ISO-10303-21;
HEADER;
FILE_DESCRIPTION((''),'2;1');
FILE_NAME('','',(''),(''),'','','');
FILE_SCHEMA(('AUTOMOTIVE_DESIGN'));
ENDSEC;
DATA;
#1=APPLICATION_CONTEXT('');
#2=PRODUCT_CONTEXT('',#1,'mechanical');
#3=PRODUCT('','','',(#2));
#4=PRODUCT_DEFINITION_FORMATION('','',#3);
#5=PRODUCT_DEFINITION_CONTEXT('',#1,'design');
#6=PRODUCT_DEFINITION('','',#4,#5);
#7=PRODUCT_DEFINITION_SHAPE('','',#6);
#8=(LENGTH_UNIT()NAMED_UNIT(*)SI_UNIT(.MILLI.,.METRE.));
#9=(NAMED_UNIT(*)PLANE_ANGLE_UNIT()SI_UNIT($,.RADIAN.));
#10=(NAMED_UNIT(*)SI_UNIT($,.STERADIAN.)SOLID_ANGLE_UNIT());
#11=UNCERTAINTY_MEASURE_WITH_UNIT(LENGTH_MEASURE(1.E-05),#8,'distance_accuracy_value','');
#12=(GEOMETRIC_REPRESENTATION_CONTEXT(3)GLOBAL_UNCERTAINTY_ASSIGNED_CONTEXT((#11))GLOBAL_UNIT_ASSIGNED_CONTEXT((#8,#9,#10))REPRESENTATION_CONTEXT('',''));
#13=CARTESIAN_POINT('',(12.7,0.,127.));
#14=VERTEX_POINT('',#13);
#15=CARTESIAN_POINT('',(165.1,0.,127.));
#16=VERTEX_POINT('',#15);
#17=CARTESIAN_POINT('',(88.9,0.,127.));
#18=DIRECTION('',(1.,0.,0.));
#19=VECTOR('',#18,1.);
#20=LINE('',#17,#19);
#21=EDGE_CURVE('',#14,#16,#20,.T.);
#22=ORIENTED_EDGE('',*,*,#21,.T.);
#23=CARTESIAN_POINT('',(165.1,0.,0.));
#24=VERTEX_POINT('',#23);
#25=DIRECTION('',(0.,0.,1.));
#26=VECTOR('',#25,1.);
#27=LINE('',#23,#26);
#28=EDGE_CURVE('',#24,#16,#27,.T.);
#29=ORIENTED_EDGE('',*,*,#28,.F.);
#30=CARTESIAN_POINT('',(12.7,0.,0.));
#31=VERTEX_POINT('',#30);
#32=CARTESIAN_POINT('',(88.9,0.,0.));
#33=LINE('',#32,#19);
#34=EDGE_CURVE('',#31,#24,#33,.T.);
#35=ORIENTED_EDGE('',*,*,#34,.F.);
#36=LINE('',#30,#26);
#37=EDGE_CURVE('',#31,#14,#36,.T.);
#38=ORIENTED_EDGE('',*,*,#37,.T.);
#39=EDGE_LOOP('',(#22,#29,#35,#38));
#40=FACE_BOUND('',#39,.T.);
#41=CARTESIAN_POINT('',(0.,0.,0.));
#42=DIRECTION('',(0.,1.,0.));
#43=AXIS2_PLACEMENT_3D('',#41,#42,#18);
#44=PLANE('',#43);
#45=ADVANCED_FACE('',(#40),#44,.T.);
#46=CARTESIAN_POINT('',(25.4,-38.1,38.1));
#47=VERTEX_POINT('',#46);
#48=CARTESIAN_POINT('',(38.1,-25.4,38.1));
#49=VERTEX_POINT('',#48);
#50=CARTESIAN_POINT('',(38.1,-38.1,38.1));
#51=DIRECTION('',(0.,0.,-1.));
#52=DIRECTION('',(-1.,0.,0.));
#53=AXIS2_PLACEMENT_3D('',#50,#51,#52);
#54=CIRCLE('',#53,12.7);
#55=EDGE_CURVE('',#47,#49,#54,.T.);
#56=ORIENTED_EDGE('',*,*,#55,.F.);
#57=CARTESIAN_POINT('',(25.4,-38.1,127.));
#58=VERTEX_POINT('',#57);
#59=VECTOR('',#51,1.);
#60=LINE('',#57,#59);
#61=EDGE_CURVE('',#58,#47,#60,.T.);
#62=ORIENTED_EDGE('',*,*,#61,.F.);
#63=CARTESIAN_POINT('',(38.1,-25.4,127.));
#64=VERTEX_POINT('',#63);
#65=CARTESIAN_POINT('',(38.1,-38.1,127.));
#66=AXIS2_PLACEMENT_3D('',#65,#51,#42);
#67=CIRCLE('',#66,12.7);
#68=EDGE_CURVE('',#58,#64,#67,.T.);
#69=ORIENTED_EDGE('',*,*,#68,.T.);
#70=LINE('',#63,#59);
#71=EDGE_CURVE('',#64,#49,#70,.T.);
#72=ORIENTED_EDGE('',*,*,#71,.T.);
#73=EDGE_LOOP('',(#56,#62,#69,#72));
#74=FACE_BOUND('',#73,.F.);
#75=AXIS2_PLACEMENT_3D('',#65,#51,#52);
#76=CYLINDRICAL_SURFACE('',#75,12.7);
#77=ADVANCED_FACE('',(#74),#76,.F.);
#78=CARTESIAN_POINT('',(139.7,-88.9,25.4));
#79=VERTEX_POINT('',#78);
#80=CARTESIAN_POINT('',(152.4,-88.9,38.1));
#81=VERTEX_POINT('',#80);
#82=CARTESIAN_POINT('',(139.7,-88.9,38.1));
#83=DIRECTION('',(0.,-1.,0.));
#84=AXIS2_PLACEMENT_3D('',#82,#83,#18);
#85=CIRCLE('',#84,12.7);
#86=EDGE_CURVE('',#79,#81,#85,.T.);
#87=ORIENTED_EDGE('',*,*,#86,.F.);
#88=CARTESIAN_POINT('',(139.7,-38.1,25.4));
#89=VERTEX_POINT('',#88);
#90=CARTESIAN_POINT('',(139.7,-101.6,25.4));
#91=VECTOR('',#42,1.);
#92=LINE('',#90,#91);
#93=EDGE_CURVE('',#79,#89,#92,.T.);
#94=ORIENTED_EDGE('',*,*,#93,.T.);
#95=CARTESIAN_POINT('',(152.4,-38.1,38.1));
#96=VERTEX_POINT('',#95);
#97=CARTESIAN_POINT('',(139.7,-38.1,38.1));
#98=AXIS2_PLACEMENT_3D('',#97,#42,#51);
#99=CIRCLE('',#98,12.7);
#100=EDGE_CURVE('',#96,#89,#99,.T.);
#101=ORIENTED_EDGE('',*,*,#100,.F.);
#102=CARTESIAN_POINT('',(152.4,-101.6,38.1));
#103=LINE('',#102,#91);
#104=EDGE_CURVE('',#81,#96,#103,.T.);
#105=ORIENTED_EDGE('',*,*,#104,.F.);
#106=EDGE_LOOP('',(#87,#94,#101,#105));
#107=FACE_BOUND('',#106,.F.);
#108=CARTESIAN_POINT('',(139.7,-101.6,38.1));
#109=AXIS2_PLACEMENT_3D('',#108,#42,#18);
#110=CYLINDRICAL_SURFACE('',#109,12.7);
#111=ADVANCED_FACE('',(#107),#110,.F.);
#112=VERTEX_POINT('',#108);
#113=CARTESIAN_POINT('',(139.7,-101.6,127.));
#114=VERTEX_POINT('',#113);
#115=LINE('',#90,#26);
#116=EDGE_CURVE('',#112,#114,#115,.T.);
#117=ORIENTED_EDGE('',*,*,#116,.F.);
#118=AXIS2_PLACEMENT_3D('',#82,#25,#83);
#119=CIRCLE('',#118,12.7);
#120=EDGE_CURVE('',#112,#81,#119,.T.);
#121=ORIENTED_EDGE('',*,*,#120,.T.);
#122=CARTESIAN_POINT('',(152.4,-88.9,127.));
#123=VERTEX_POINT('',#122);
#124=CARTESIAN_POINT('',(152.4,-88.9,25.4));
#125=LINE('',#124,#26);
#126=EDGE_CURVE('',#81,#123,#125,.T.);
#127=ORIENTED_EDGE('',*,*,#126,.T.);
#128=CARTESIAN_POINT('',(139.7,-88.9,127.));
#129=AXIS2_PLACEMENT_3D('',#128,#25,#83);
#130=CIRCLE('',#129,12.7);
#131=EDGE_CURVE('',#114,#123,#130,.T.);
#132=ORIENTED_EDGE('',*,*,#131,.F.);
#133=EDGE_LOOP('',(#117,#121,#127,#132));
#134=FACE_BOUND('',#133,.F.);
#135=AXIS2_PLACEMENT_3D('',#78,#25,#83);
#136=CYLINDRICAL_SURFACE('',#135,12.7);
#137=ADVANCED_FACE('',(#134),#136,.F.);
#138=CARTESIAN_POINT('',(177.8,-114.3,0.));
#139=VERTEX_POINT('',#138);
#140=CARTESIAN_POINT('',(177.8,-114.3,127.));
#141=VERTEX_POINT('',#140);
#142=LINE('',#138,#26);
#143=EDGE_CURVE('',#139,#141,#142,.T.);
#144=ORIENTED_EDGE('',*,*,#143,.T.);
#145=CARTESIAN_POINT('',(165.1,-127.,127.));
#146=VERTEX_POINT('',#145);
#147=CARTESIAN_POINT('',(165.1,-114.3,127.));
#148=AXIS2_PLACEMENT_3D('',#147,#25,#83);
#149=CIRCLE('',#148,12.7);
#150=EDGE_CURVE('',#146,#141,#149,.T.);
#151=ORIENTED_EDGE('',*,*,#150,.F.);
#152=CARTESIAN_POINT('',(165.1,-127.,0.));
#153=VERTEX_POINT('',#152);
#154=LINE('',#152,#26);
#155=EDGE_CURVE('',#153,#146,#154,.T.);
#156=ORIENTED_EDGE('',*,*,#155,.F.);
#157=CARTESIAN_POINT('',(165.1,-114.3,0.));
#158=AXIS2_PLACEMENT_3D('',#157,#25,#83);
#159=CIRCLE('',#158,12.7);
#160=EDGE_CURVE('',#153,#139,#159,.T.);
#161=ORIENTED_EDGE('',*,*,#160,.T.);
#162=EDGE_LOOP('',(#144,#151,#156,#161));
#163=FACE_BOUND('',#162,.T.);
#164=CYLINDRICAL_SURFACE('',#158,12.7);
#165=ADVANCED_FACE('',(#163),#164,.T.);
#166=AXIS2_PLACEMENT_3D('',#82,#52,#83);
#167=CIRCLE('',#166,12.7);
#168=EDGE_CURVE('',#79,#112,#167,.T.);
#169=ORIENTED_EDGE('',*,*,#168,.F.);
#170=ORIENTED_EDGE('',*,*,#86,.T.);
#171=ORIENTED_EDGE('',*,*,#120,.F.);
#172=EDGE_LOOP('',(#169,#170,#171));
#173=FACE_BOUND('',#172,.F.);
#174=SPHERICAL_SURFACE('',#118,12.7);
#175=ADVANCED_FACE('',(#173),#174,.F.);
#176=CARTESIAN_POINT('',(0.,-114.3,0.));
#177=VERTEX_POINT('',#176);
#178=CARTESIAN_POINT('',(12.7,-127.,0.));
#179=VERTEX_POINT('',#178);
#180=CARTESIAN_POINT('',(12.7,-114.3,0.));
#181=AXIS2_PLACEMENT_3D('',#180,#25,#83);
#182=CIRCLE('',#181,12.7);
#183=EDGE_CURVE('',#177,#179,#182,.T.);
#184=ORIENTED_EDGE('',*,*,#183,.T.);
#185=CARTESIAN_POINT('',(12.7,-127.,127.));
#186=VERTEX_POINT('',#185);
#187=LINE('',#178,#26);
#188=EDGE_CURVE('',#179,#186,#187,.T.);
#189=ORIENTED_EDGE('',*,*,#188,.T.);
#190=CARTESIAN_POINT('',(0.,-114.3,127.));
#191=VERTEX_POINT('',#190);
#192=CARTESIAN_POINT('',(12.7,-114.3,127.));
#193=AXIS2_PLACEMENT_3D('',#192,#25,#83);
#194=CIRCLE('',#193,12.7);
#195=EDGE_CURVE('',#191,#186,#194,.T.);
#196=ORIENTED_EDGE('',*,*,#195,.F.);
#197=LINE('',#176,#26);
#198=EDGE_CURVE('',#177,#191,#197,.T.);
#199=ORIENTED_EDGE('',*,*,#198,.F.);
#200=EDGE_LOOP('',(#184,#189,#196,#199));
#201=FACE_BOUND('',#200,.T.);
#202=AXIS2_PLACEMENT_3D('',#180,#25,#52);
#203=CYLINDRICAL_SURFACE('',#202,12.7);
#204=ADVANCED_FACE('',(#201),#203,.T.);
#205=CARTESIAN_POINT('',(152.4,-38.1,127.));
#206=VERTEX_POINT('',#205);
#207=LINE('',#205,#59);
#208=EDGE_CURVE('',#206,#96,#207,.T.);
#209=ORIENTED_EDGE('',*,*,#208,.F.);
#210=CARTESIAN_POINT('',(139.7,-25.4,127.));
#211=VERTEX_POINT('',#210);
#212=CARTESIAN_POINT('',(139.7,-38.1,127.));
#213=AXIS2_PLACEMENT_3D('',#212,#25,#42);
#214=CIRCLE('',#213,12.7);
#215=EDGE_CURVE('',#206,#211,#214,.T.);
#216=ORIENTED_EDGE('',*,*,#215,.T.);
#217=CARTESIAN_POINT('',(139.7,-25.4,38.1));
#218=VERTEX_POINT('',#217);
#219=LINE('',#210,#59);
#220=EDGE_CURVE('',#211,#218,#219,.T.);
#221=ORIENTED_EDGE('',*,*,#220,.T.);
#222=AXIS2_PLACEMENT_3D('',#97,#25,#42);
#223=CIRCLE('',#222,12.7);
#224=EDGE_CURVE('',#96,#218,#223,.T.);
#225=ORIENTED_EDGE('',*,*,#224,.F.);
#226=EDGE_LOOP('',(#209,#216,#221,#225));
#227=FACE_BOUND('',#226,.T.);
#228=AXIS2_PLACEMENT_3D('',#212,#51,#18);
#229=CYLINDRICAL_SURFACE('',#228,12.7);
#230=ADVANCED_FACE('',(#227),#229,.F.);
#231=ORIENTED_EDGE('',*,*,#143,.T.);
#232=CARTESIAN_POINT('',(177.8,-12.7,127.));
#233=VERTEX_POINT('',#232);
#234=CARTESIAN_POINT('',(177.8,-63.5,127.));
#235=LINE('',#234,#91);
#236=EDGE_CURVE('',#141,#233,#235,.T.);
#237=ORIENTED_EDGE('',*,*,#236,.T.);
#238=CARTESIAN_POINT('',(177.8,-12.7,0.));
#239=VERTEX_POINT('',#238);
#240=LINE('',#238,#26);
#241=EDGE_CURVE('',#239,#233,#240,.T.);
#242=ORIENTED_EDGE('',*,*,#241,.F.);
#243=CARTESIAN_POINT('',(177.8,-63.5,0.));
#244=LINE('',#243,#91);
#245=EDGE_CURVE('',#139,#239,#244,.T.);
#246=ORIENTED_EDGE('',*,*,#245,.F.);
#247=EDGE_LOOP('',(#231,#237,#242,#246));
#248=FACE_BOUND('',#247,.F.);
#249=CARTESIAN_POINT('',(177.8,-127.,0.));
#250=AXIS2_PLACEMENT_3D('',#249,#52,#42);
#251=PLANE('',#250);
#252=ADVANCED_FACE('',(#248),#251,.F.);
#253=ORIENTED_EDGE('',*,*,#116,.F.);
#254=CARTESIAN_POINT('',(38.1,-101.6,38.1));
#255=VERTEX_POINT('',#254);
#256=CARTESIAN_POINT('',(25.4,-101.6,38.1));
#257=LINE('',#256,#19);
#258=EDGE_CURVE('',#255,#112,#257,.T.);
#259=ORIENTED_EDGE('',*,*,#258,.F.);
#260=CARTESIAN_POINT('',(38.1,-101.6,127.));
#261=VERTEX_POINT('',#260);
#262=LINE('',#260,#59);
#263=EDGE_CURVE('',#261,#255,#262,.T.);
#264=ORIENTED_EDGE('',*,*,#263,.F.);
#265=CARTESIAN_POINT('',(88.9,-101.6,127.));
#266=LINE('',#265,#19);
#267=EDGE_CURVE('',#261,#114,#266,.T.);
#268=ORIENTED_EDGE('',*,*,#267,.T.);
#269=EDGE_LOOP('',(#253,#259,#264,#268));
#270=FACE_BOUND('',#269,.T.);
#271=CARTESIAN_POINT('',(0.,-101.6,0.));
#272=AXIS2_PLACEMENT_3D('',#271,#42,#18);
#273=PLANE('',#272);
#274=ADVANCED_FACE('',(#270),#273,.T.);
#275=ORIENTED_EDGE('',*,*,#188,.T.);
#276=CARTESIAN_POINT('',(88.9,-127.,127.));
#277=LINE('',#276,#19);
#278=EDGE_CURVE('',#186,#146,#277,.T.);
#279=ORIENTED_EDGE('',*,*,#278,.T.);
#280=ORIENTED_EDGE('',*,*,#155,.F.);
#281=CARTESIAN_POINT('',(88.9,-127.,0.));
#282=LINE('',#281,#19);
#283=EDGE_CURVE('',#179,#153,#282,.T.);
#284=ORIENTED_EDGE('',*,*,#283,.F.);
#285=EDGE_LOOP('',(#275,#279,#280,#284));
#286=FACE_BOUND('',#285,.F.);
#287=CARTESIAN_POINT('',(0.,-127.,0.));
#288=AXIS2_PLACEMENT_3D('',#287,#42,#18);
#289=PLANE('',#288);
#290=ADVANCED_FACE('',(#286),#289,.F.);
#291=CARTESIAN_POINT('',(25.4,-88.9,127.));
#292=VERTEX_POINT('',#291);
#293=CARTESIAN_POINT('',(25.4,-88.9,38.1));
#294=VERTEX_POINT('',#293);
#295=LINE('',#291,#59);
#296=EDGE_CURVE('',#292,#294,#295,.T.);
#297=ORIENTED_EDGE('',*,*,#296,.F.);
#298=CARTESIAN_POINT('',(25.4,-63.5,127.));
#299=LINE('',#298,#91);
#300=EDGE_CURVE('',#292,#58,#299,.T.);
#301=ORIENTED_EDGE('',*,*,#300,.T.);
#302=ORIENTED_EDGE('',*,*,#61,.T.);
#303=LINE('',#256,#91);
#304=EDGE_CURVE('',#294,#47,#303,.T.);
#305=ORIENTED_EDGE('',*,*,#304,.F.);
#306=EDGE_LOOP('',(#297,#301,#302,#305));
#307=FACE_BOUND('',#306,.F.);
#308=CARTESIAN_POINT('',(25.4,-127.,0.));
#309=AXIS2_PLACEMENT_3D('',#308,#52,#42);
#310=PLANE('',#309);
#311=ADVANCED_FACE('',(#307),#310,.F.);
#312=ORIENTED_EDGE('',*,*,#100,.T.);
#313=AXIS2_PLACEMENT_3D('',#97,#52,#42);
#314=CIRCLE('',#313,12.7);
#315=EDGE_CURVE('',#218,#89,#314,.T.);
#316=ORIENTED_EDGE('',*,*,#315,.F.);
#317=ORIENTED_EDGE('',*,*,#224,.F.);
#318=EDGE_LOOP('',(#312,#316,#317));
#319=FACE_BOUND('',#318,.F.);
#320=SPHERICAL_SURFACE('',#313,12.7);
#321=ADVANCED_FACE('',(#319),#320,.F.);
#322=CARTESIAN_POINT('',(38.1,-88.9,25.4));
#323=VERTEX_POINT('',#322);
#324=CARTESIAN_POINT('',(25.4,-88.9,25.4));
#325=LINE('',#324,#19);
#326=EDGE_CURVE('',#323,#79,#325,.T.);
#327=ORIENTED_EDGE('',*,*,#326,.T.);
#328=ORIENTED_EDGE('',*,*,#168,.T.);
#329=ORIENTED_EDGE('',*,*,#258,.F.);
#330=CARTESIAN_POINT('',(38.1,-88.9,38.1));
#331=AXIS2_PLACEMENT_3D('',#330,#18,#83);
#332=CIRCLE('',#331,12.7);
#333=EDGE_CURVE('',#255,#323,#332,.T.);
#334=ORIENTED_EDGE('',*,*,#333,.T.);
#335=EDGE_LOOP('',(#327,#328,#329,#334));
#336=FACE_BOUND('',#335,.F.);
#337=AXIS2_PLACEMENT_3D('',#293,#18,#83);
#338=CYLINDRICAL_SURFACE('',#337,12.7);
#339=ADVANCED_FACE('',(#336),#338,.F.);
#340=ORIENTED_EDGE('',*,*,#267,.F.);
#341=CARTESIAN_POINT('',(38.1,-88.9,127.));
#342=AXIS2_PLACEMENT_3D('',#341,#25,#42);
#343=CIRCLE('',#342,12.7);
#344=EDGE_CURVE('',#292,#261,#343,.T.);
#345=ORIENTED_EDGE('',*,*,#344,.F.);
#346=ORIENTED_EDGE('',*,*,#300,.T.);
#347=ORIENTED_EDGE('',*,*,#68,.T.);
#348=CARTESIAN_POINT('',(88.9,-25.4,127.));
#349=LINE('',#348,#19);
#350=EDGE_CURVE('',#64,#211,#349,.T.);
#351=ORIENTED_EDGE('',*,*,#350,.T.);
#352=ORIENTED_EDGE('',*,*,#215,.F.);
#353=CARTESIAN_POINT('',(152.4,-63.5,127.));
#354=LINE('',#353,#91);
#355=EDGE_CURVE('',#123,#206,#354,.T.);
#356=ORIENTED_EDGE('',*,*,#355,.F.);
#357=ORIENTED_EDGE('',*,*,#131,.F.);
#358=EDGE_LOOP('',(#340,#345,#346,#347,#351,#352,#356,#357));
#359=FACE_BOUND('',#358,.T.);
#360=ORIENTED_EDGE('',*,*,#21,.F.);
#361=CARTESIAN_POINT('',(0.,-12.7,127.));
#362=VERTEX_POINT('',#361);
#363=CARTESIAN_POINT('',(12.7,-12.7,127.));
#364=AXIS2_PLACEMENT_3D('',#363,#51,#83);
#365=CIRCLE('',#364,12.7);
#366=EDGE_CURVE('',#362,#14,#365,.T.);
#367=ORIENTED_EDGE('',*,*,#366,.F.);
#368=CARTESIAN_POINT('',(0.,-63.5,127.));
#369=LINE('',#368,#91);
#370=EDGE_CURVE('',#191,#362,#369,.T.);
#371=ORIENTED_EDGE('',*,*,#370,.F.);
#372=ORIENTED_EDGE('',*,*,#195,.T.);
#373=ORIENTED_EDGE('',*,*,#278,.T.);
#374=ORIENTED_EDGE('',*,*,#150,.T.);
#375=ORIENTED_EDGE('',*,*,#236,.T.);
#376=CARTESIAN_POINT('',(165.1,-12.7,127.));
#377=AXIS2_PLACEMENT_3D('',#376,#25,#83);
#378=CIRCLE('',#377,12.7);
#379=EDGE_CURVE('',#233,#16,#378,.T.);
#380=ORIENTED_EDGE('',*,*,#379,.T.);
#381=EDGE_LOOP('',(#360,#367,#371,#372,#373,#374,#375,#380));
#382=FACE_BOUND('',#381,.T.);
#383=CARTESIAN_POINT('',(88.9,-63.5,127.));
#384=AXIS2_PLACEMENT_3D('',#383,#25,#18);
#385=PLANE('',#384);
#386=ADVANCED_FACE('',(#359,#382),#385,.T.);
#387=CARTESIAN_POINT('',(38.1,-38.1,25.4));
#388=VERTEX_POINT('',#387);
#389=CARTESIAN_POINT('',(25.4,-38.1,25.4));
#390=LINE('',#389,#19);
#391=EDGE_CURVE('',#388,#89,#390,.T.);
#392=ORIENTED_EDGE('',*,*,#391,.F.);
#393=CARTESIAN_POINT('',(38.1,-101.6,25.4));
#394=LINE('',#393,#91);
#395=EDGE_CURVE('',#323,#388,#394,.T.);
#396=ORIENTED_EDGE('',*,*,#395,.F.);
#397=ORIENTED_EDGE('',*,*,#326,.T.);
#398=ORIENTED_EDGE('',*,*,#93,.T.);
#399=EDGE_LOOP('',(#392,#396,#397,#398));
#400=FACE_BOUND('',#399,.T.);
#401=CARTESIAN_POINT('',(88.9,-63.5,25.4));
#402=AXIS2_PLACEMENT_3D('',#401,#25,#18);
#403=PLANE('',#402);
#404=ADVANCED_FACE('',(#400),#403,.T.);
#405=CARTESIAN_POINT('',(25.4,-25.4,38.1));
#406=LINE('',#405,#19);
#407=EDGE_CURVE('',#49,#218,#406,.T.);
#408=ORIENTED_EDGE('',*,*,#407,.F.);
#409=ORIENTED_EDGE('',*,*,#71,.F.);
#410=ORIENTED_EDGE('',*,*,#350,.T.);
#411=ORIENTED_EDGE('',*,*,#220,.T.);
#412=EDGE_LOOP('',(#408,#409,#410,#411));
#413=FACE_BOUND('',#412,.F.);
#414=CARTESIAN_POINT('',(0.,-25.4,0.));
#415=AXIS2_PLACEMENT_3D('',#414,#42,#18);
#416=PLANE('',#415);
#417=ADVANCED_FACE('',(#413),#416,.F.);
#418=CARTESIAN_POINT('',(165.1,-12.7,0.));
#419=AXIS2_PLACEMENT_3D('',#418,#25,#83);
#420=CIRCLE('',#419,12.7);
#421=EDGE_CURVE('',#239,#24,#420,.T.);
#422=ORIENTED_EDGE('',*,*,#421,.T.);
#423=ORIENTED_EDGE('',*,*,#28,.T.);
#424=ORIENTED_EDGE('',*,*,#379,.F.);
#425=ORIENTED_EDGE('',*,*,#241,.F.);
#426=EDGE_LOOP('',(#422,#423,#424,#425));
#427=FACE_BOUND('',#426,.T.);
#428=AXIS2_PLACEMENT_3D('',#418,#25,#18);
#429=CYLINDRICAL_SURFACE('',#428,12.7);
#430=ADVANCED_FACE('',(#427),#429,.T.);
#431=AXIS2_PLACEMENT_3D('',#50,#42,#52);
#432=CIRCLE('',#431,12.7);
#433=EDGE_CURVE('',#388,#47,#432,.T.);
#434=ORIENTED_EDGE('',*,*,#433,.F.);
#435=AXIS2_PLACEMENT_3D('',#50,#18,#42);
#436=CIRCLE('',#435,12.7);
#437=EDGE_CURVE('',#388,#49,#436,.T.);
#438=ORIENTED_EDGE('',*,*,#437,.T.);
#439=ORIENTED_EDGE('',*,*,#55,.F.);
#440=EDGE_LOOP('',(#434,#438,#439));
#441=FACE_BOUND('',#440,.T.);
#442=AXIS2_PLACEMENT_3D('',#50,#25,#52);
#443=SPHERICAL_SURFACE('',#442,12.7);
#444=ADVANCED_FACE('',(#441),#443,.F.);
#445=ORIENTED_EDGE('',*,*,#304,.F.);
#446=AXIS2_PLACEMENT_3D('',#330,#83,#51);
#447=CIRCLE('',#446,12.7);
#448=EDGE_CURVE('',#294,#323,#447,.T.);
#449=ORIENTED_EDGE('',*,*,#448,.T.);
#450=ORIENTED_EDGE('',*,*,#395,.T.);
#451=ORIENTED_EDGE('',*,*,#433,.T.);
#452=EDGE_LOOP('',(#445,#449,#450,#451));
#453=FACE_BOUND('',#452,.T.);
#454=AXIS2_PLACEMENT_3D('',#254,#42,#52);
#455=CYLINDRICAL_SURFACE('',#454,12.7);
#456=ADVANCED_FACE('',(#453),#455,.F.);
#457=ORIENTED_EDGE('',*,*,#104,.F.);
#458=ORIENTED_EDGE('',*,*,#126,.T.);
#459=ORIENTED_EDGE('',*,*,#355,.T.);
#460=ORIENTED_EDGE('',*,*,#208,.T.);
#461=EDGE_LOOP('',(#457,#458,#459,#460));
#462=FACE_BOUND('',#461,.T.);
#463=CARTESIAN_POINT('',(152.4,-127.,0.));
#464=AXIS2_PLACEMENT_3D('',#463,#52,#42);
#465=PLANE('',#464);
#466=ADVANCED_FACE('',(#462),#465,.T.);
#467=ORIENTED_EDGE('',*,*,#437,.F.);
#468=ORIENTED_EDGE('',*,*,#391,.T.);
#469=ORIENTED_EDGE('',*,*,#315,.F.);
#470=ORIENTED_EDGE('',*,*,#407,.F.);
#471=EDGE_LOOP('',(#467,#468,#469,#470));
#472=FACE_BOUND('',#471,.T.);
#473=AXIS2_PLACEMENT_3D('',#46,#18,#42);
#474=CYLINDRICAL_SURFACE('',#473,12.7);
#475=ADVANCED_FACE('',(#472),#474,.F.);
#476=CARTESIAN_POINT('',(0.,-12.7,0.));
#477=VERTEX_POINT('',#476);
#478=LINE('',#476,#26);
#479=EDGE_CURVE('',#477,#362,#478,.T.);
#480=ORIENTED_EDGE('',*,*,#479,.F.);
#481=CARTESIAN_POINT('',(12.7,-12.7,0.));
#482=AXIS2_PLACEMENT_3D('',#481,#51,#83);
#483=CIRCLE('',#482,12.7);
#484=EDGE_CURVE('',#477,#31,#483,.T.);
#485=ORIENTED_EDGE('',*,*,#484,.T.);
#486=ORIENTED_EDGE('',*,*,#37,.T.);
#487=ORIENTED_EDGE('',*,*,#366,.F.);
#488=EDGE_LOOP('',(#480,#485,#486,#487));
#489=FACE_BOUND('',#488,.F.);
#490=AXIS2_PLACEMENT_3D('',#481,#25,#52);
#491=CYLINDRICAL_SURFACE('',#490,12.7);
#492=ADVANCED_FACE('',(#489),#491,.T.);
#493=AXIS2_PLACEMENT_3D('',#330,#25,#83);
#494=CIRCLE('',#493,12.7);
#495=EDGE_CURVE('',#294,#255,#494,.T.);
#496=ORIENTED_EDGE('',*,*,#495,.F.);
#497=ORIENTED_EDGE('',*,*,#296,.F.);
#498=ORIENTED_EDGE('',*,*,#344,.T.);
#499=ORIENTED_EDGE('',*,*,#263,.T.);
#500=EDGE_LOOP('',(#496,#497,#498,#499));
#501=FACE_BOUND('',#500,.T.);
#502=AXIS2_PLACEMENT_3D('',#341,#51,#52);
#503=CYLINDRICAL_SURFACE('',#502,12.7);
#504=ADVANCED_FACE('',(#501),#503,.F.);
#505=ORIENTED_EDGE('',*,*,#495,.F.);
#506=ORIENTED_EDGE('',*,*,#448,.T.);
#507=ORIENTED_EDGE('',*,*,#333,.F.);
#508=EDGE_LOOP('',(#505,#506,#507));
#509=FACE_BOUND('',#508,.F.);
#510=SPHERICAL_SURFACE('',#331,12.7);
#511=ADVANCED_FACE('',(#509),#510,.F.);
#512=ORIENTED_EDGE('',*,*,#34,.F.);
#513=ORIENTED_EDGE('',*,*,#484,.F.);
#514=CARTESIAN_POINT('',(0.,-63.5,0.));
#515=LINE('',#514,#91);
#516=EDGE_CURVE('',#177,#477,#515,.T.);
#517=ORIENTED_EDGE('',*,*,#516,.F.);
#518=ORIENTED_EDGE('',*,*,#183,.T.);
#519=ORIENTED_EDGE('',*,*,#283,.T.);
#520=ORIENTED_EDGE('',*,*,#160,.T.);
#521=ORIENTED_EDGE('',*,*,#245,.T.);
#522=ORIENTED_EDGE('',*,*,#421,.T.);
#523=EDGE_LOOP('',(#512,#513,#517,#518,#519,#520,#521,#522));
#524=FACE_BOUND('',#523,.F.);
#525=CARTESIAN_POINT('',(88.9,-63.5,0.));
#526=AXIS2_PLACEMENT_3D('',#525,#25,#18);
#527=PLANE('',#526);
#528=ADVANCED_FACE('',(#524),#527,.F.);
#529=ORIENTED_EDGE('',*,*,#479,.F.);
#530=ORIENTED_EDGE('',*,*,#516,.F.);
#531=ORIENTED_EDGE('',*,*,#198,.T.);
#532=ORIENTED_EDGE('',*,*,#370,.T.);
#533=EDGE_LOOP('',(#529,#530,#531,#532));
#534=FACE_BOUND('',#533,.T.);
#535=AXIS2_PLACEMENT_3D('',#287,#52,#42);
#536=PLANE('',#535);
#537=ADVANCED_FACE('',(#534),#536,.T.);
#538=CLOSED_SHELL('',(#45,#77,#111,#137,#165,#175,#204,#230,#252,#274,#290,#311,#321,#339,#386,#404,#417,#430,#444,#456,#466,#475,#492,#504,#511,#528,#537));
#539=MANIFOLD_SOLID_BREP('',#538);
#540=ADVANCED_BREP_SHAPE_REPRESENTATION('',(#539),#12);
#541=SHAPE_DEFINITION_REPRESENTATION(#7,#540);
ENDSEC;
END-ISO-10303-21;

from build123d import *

# Parameters (mm, degrees)
F0_W     = 177.8
F0_H     = 127
F1_DEPTH = 127
F2_T     = -25.4
F3_R     = 12.7


with BuildPart() as f1:
    # F0 (on Top) → F1 (new body)
    with BuildSketch(Plane.XY):
        with Locations((88.9, -63.5)):
            Rectangle(F0_W, F0_H)
    extrude(amount=F1_DEPTH)

    # F2
    f2_openings = [f1.faces().sort_by_distance(p)[0] for p in [
        (88.9, -63.5, 127),
    ]]
    offset(amount=F2_T, openings=f2_openings)

    # F3
    f3_edges = [f1.edges().sort_by_distance(p)[0] for p in [
        (152.4, -101.6, 76.2),
        (88.9, -101.6, 25.4),
        (25.4, -101.6, 76.2),
        (25.4, -25.4, 76.2),
        (25.4, -63.5, 25.4),
        (88.9, -25.4, 25.4),
        (152.4, -25.4, 76.2),
        (152.4, -63.5, 25.4),
        (177.8, 0, 63.5),
        (177.8, -127, 63.5),
        (0, -127, 63.5),
        (0, 0, 63.5),
    ]]
    fillet(f3_edges, radius=F3_R)


solid = f1.part
